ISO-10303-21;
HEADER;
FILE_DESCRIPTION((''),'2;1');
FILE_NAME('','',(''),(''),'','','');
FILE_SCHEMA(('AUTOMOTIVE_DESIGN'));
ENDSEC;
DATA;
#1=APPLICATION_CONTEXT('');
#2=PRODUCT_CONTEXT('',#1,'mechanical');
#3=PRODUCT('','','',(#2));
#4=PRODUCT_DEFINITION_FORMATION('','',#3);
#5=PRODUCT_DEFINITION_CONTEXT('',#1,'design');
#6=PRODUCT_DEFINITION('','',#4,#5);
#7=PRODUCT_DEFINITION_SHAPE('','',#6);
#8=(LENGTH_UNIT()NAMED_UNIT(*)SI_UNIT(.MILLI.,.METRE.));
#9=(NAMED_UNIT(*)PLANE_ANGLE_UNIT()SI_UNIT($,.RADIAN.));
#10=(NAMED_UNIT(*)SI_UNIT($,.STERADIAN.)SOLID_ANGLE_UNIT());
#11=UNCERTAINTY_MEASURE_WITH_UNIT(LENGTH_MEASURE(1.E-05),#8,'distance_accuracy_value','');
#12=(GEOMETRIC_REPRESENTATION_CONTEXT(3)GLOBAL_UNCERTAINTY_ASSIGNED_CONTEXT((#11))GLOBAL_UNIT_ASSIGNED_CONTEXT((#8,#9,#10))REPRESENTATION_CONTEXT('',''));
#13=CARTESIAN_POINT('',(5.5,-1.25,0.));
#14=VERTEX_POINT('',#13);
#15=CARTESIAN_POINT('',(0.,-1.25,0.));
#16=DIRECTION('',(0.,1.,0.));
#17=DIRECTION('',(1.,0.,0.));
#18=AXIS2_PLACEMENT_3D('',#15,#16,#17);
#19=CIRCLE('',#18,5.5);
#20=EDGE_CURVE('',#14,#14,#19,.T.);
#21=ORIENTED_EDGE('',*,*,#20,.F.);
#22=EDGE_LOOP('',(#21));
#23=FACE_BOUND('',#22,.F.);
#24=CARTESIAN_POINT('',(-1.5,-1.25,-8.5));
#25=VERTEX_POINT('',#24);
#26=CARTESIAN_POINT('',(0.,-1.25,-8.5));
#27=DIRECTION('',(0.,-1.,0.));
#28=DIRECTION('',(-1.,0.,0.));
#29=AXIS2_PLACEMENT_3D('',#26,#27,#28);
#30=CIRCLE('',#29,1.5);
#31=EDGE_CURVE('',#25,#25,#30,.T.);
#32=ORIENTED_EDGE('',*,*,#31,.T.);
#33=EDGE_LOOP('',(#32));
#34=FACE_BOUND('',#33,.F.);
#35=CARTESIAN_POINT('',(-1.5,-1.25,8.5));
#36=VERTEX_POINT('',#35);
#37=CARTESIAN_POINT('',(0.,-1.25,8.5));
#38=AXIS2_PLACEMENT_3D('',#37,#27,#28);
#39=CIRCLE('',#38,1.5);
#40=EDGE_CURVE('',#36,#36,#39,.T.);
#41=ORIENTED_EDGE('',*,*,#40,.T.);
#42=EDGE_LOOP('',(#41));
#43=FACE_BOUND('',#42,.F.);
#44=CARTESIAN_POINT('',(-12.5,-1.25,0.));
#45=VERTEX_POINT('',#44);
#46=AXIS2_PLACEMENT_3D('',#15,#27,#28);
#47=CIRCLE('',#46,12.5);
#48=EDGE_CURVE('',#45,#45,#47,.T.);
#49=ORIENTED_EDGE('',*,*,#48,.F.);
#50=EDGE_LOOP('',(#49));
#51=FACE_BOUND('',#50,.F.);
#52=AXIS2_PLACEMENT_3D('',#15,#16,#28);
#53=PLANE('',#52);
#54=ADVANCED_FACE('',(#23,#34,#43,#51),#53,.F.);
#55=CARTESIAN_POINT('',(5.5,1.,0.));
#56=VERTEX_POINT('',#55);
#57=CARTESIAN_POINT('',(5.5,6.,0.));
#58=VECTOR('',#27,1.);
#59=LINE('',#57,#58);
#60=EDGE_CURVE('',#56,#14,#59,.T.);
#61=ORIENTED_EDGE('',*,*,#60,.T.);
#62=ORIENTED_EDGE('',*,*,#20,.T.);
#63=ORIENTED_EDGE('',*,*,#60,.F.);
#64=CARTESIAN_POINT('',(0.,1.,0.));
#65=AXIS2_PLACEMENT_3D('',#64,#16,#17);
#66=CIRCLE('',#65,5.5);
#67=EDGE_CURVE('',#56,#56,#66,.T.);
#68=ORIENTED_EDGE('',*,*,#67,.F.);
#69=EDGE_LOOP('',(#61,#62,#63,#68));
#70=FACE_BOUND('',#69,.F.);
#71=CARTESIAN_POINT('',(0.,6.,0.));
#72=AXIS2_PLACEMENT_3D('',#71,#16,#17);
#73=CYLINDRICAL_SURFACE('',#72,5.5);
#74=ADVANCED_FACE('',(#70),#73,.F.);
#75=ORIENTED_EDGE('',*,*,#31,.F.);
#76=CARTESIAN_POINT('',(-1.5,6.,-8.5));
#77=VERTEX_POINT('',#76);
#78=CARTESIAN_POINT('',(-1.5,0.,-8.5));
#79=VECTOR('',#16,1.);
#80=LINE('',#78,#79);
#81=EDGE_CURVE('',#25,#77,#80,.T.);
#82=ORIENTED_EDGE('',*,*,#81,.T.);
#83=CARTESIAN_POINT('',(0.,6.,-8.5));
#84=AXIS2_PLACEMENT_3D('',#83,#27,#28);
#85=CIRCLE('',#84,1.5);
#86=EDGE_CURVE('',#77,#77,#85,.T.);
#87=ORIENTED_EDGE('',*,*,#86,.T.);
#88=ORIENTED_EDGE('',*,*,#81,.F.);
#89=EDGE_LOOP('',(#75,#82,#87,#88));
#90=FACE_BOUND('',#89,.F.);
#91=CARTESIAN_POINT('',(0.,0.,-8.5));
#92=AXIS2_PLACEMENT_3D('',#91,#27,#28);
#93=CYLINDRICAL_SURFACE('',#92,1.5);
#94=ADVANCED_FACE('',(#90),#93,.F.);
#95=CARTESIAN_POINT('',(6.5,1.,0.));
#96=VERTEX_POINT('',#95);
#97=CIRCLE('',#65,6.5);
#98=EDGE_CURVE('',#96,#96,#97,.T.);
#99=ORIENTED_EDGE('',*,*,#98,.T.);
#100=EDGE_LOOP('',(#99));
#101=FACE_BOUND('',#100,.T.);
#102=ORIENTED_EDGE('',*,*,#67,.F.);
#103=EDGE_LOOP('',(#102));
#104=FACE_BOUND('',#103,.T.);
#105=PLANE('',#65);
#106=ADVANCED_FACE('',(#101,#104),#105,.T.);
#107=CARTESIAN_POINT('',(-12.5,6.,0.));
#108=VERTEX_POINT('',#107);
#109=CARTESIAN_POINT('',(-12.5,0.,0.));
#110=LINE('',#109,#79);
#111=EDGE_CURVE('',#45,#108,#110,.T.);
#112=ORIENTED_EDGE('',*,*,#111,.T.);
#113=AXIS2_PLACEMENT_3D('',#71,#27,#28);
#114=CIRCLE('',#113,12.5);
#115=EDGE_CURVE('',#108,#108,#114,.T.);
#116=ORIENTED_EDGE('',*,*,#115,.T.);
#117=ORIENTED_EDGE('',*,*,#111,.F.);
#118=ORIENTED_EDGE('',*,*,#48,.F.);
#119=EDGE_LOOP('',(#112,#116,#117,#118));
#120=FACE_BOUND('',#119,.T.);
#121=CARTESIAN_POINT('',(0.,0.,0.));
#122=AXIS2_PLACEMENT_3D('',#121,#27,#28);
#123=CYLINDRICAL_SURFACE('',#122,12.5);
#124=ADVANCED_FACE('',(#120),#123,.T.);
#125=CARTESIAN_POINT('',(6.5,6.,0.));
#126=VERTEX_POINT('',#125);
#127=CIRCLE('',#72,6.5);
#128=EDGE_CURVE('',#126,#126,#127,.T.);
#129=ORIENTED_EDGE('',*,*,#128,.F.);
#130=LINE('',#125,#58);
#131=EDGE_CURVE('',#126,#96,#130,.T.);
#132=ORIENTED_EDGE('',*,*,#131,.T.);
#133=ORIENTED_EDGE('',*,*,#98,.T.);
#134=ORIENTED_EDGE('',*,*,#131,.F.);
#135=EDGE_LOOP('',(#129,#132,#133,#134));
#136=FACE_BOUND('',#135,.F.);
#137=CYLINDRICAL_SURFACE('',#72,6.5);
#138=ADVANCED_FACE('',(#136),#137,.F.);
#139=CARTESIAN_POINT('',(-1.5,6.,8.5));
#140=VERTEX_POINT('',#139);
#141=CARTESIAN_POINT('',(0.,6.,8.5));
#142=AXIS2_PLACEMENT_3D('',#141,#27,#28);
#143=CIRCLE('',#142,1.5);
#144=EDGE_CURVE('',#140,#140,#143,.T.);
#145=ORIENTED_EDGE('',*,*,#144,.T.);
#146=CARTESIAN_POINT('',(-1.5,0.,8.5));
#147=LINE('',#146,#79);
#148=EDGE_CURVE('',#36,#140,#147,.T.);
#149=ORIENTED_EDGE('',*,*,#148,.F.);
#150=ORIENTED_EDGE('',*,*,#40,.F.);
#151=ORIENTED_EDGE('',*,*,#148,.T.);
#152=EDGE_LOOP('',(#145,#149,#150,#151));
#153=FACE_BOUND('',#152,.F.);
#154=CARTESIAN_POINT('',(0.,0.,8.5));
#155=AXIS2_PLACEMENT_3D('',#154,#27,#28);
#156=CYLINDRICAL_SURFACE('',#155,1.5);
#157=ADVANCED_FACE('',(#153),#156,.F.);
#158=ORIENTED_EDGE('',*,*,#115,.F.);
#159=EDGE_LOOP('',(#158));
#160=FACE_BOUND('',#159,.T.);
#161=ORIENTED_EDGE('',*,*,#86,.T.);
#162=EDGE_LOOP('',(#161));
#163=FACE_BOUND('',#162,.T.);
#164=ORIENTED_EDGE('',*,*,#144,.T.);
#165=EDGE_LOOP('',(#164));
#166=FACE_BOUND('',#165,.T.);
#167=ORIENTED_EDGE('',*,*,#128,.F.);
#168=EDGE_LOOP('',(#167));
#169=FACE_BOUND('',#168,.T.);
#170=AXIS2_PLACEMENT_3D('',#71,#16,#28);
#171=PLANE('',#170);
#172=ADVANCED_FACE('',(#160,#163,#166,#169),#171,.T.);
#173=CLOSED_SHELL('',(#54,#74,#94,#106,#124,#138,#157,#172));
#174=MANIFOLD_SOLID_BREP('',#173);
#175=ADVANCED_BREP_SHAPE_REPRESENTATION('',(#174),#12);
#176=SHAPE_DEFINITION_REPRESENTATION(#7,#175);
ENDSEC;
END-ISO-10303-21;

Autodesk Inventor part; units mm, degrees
ref_plane "YZ Plane" through (0, 0, 0) normal (1, 0, 0) x (0, 1, 0)
ref_plane "XZ Plane" through (0, 0, 0) normal (0, 1, 0) x (-1, 0, 0)
ref_plane "XY Plane" through (0, 0, 0) normal (0, 0, 1) x (1, 0, 0)
sketch "草圖1" plane through (0, 0, 0) normal (0, 1, 0) x (-1, 0, 0)
  circle A0 centre (0, 0) radius 12.5
  circle A1 centre (0, 8.5) radius 1.5
  circle A2 centre (0, -8.5) radius 1.5
  dimension "d0" = 25
  dimension "d1" = 17
  dimension "d2" = 8.5
  dimension "d3" = 3
  dimension "d4" = 3
extrude "擠出1" add sketch "草圖1" along normal blind 6
sketch "草圖2" plane through (0, 6, 0) normal (0, 1, 0) x (1, 0, 0)
  circle A0 centre (0, 0) radius 5.5
  dimension "d7" = 11
extrude "擠出2" cut sketch "草圖2" against normal through all
sketch "草圖3" plane through (0, 6, 0) normal (0, 1, 0) x (1, 0, 0)
  circle A0 centre (0, 0) radius 6.5
  dimension "d10" = 13
extrude "擠出3" cut sketch "草圖3" against normal blind 5
move faces "移動1" translate (0, -1.25, 0) faces at (3.8939, 0, -7.6516)
properties part number "wheel_base_cover"
